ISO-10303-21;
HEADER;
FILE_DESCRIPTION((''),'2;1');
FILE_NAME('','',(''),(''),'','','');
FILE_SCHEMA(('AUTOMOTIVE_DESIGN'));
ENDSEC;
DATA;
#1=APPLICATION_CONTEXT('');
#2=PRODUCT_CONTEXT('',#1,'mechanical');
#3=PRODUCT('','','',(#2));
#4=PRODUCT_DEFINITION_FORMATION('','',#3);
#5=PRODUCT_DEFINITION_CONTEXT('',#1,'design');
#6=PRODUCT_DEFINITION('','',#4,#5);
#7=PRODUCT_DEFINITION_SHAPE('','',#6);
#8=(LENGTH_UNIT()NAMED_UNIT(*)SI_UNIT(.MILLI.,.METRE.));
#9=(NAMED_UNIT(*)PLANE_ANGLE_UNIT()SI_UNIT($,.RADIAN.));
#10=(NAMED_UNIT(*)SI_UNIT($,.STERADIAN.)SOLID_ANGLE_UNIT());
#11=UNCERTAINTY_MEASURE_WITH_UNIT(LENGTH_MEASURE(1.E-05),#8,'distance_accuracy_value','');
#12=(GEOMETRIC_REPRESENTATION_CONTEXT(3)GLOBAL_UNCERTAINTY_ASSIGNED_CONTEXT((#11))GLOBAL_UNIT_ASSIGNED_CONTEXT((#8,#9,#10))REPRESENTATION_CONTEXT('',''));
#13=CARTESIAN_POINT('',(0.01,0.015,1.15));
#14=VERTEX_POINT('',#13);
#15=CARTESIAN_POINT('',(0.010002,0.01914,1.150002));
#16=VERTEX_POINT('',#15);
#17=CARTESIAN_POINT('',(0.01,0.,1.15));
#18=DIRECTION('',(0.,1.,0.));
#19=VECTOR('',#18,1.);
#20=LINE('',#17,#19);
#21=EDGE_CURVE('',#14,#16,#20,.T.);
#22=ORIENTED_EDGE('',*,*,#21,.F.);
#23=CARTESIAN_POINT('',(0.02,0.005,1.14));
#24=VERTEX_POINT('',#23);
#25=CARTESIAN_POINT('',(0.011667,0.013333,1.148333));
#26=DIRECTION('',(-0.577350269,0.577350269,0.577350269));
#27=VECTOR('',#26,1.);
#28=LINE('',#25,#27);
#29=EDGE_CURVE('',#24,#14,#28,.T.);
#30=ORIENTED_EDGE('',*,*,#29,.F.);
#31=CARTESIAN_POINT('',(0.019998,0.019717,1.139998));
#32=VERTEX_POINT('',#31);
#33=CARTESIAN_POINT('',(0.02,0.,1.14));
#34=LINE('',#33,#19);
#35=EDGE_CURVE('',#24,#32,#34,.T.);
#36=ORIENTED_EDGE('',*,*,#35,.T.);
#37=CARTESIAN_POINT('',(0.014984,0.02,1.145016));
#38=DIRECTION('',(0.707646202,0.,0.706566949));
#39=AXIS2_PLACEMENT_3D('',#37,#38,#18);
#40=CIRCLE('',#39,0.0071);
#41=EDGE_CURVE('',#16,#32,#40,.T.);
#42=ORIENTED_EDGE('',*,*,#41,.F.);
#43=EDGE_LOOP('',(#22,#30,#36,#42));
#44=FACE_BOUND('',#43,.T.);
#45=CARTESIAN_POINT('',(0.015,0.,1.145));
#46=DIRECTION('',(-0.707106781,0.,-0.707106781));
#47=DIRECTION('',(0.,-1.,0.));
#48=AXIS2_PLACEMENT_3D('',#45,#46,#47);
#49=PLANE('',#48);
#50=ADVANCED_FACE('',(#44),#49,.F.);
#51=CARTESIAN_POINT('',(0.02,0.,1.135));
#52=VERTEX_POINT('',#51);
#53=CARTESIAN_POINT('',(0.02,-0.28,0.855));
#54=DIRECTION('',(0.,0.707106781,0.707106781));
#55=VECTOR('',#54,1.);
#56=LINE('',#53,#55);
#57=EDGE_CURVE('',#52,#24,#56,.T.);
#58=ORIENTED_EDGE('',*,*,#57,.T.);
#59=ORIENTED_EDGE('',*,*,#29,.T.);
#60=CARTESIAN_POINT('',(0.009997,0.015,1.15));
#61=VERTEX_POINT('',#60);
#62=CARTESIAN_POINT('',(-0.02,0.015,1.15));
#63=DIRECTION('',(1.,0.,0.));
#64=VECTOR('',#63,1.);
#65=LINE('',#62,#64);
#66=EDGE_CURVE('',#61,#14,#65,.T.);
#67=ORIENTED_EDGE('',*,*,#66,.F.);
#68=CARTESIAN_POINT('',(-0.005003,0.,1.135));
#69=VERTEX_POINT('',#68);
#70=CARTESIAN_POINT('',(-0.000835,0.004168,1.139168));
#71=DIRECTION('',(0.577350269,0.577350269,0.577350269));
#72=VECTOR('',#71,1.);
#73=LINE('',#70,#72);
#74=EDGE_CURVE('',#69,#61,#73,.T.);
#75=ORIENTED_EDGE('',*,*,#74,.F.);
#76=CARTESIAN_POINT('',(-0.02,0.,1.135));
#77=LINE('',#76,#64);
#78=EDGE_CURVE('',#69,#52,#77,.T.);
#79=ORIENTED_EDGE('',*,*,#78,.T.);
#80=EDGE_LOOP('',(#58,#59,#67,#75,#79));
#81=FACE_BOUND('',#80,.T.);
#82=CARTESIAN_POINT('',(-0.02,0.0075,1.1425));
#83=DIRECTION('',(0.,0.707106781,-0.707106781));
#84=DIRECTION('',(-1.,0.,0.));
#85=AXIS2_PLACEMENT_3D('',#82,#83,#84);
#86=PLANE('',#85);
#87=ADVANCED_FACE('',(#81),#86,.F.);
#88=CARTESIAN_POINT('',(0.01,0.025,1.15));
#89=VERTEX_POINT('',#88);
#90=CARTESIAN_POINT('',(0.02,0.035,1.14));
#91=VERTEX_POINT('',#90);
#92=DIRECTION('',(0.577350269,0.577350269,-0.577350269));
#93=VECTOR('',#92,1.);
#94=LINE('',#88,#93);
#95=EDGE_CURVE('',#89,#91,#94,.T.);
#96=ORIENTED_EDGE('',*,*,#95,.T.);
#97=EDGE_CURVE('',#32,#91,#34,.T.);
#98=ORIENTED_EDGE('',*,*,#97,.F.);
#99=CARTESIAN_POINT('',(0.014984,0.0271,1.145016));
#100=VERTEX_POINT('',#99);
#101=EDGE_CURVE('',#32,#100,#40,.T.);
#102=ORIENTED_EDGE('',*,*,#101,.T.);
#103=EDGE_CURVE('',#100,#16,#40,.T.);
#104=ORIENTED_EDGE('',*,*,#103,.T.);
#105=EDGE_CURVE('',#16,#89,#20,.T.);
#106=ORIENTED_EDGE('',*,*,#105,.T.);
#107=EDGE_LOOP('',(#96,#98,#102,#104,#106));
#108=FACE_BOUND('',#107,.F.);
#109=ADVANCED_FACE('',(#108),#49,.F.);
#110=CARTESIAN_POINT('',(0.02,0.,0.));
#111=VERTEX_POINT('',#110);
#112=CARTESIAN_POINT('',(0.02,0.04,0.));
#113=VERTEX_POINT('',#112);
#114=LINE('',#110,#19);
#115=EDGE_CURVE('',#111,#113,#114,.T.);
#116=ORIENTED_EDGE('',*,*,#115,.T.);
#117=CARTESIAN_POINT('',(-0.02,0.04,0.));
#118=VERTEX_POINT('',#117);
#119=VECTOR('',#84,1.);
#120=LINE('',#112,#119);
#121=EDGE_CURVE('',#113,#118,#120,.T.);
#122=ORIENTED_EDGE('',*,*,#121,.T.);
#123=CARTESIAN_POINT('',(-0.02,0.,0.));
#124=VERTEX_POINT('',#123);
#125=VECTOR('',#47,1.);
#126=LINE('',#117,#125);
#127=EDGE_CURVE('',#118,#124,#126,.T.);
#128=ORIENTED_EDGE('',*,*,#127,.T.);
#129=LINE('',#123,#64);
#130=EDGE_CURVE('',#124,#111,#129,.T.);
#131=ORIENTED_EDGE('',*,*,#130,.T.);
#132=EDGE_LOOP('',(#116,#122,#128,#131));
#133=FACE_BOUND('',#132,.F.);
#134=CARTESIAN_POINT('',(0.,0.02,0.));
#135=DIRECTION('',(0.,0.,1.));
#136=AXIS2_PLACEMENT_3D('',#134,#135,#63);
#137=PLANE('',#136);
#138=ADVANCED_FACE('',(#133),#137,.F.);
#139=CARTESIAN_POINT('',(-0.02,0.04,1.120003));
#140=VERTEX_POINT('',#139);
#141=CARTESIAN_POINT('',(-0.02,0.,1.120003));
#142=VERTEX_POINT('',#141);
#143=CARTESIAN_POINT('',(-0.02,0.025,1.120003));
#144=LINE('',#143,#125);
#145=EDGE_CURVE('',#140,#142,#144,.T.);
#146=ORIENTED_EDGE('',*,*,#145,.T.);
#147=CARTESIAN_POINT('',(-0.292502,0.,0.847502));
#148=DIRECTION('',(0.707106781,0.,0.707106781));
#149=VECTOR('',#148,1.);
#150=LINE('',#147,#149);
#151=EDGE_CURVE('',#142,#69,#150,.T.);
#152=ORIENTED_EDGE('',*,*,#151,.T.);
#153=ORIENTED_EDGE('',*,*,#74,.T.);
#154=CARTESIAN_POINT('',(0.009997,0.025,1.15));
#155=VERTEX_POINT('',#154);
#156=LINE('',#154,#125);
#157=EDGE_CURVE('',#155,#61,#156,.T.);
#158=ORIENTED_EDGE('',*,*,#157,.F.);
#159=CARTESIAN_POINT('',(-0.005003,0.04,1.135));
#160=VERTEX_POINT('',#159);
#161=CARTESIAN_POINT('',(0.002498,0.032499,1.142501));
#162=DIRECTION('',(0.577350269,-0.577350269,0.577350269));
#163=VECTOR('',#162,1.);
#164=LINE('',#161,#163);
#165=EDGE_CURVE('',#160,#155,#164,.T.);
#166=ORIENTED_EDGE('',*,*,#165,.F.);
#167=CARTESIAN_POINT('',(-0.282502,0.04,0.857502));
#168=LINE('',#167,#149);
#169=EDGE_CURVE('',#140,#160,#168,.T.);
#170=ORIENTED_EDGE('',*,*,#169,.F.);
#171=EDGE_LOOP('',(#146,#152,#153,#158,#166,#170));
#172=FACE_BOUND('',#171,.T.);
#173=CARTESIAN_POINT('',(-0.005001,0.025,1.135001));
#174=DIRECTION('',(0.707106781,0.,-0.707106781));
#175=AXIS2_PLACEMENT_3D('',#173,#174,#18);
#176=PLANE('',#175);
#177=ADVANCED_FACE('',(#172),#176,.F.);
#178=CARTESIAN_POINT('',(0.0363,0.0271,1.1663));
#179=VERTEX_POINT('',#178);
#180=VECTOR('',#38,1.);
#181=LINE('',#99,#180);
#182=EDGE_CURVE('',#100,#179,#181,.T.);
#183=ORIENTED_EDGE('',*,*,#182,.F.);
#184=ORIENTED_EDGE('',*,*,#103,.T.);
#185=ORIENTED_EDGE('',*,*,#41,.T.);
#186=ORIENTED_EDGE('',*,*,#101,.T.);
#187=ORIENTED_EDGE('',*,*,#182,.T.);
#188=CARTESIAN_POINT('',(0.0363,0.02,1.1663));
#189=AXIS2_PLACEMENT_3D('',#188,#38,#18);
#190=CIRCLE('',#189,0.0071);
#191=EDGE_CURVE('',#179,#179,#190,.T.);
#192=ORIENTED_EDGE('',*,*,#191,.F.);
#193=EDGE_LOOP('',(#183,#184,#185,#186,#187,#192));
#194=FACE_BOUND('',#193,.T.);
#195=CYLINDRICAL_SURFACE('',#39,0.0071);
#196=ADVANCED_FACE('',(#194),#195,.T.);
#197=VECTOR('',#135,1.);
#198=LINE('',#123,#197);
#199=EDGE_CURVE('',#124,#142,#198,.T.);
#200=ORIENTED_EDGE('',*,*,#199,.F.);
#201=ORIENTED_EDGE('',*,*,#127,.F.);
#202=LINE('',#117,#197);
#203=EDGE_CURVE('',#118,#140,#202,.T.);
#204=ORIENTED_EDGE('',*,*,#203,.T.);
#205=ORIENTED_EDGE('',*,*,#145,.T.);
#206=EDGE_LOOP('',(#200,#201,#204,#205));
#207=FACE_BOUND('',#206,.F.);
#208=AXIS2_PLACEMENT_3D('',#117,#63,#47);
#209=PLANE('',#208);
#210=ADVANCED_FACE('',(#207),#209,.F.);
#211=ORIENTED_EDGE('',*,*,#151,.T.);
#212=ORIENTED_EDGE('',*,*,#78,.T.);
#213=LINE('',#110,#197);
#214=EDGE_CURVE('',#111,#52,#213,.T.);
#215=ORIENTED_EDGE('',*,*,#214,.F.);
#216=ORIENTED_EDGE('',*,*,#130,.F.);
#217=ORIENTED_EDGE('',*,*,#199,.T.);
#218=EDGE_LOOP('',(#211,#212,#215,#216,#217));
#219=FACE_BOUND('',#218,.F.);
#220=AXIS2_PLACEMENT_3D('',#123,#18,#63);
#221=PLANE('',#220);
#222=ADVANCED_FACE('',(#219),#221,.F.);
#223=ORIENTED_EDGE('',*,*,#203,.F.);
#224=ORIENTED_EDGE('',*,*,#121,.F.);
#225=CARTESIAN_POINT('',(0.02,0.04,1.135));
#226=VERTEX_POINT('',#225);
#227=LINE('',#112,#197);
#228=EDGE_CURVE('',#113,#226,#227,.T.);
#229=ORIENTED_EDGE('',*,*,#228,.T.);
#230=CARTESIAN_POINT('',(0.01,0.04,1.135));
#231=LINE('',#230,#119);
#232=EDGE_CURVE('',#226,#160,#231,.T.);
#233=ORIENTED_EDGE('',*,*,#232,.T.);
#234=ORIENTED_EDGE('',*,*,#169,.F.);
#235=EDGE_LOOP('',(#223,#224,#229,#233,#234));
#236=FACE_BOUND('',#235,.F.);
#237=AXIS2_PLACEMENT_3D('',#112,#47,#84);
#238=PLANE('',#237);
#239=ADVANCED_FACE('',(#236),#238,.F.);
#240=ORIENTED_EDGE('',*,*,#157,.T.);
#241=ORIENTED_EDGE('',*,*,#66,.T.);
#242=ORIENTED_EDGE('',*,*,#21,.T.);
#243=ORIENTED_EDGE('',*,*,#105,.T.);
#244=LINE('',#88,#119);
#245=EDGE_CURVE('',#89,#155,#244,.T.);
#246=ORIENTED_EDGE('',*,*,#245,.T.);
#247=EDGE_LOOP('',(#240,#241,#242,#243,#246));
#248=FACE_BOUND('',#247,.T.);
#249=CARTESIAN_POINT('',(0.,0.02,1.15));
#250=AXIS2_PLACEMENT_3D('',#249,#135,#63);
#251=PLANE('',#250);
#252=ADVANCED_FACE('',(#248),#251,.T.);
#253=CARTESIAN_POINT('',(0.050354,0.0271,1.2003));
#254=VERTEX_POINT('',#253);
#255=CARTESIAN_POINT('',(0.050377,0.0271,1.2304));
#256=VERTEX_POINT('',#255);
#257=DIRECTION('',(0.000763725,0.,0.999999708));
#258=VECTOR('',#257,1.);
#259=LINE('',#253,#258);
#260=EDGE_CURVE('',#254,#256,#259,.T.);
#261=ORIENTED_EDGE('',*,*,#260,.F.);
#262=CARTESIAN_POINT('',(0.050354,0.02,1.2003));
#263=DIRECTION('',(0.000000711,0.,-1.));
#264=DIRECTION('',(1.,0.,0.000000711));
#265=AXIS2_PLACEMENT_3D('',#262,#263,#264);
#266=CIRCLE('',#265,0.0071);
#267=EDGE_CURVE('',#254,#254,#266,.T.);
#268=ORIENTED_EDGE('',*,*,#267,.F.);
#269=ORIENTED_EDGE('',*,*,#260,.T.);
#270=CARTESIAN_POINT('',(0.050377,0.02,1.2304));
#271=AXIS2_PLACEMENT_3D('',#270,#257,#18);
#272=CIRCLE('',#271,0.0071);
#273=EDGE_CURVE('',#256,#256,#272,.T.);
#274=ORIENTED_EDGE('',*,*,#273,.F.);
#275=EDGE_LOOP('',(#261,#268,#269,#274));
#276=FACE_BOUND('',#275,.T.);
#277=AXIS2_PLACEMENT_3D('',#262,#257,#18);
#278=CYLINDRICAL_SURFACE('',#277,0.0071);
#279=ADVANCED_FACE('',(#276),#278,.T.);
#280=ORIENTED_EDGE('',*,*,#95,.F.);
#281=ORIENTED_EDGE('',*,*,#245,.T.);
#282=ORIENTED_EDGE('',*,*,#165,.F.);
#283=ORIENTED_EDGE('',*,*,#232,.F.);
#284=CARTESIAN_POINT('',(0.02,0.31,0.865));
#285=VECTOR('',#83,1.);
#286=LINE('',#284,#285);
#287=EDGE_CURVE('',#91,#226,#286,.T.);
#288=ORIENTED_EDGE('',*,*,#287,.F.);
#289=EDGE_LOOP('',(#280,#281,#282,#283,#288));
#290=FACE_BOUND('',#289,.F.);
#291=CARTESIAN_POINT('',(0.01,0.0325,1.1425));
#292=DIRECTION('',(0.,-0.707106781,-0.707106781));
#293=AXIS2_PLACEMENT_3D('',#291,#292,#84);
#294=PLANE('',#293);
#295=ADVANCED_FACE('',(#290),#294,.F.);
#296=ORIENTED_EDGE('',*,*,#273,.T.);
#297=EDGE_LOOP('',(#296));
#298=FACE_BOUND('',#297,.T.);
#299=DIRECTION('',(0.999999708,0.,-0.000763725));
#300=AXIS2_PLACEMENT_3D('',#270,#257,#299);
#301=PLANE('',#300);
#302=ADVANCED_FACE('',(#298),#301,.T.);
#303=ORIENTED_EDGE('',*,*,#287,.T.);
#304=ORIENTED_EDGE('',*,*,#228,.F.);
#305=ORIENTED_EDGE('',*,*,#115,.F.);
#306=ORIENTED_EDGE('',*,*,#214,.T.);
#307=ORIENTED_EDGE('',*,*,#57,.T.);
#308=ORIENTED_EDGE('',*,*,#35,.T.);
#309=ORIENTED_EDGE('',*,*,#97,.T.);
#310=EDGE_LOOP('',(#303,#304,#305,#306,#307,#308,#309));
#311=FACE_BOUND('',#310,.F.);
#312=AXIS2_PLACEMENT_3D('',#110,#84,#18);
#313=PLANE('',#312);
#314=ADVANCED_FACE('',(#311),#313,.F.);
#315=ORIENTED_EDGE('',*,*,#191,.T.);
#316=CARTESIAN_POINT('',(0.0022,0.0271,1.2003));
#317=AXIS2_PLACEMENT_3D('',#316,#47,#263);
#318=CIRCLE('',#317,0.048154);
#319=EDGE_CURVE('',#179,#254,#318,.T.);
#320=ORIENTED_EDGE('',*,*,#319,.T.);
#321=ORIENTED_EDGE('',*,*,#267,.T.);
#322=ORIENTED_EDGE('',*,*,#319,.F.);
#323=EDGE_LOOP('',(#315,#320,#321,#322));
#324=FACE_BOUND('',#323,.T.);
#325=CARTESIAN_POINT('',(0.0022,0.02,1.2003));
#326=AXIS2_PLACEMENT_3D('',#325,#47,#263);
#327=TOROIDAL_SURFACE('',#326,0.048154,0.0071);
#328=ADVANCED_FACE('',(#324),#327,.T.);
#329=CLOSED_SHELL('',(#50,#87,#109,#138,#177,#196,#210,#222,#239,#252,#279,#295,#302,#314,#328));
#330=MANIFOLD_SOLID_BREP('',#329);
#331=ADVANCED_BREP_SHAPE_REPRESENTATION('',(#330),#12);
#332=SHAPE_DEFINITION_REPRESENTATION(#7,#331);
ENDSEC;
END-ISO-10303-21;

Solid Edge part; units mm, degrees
sketch "Sketch1" plane through (0, 0, 0) normal (0, 0, 1) x (1, 0, 0)
  line L0 (-0.02, 0) -> (0.02, 0)
  line L1 (0.02, 0) -> (0.02, 0.04)
  line L2 (0.02, 0.04) -> (-0.02, 0.04)
  line L3 (-0.02, 0.04) -> (-0.02, 0)
  dimension "D1" = 0.04
extrude "Protrusion1" add sketch "Sketch1" along normal blind 1.15
chamfer "Fase_1" distance 0.01 angle 45 1 edges at (0.02, 0.02, 1.15)
sketch "Sketch2" plane through (0, 0.02, 0.45) normal (0, -1, 0) x (0, 0, -1)
  line L0 (-0.695, 0.015) -> (-0.7163, 0.0363)
  arc A0 (-0.7163, 0.0363) -> (-0.7503, 0.0504) centre (-0.7503, 0.0022) ccw
  line L1 (-0.7503, 0.0504) -> (-0.7804, 0.0504)
  dimension "D1" = 0.0301
  dimension "D2" = 0.0301
sketch "Sketch3" plane through (0.14, 0.02, 1.02) normal (0.7071068, 0, 0.7071068) x (0, 1, 0)
  circle A0 centre (0, 0.1768) radius 0.0071
sweep "SweptProtrusion1" add profiles "Sketch3" path "Sketch2"
chamfer "Fase_3" distance 0.015 angle 45 2 edges at (-0.005, 0, 1.15) (-0.005, 0.04, 1.15)
chamfer "Fase_2" distance 0.03 angle 45 1 edges at (-0.02, 0.02, 1.15)
